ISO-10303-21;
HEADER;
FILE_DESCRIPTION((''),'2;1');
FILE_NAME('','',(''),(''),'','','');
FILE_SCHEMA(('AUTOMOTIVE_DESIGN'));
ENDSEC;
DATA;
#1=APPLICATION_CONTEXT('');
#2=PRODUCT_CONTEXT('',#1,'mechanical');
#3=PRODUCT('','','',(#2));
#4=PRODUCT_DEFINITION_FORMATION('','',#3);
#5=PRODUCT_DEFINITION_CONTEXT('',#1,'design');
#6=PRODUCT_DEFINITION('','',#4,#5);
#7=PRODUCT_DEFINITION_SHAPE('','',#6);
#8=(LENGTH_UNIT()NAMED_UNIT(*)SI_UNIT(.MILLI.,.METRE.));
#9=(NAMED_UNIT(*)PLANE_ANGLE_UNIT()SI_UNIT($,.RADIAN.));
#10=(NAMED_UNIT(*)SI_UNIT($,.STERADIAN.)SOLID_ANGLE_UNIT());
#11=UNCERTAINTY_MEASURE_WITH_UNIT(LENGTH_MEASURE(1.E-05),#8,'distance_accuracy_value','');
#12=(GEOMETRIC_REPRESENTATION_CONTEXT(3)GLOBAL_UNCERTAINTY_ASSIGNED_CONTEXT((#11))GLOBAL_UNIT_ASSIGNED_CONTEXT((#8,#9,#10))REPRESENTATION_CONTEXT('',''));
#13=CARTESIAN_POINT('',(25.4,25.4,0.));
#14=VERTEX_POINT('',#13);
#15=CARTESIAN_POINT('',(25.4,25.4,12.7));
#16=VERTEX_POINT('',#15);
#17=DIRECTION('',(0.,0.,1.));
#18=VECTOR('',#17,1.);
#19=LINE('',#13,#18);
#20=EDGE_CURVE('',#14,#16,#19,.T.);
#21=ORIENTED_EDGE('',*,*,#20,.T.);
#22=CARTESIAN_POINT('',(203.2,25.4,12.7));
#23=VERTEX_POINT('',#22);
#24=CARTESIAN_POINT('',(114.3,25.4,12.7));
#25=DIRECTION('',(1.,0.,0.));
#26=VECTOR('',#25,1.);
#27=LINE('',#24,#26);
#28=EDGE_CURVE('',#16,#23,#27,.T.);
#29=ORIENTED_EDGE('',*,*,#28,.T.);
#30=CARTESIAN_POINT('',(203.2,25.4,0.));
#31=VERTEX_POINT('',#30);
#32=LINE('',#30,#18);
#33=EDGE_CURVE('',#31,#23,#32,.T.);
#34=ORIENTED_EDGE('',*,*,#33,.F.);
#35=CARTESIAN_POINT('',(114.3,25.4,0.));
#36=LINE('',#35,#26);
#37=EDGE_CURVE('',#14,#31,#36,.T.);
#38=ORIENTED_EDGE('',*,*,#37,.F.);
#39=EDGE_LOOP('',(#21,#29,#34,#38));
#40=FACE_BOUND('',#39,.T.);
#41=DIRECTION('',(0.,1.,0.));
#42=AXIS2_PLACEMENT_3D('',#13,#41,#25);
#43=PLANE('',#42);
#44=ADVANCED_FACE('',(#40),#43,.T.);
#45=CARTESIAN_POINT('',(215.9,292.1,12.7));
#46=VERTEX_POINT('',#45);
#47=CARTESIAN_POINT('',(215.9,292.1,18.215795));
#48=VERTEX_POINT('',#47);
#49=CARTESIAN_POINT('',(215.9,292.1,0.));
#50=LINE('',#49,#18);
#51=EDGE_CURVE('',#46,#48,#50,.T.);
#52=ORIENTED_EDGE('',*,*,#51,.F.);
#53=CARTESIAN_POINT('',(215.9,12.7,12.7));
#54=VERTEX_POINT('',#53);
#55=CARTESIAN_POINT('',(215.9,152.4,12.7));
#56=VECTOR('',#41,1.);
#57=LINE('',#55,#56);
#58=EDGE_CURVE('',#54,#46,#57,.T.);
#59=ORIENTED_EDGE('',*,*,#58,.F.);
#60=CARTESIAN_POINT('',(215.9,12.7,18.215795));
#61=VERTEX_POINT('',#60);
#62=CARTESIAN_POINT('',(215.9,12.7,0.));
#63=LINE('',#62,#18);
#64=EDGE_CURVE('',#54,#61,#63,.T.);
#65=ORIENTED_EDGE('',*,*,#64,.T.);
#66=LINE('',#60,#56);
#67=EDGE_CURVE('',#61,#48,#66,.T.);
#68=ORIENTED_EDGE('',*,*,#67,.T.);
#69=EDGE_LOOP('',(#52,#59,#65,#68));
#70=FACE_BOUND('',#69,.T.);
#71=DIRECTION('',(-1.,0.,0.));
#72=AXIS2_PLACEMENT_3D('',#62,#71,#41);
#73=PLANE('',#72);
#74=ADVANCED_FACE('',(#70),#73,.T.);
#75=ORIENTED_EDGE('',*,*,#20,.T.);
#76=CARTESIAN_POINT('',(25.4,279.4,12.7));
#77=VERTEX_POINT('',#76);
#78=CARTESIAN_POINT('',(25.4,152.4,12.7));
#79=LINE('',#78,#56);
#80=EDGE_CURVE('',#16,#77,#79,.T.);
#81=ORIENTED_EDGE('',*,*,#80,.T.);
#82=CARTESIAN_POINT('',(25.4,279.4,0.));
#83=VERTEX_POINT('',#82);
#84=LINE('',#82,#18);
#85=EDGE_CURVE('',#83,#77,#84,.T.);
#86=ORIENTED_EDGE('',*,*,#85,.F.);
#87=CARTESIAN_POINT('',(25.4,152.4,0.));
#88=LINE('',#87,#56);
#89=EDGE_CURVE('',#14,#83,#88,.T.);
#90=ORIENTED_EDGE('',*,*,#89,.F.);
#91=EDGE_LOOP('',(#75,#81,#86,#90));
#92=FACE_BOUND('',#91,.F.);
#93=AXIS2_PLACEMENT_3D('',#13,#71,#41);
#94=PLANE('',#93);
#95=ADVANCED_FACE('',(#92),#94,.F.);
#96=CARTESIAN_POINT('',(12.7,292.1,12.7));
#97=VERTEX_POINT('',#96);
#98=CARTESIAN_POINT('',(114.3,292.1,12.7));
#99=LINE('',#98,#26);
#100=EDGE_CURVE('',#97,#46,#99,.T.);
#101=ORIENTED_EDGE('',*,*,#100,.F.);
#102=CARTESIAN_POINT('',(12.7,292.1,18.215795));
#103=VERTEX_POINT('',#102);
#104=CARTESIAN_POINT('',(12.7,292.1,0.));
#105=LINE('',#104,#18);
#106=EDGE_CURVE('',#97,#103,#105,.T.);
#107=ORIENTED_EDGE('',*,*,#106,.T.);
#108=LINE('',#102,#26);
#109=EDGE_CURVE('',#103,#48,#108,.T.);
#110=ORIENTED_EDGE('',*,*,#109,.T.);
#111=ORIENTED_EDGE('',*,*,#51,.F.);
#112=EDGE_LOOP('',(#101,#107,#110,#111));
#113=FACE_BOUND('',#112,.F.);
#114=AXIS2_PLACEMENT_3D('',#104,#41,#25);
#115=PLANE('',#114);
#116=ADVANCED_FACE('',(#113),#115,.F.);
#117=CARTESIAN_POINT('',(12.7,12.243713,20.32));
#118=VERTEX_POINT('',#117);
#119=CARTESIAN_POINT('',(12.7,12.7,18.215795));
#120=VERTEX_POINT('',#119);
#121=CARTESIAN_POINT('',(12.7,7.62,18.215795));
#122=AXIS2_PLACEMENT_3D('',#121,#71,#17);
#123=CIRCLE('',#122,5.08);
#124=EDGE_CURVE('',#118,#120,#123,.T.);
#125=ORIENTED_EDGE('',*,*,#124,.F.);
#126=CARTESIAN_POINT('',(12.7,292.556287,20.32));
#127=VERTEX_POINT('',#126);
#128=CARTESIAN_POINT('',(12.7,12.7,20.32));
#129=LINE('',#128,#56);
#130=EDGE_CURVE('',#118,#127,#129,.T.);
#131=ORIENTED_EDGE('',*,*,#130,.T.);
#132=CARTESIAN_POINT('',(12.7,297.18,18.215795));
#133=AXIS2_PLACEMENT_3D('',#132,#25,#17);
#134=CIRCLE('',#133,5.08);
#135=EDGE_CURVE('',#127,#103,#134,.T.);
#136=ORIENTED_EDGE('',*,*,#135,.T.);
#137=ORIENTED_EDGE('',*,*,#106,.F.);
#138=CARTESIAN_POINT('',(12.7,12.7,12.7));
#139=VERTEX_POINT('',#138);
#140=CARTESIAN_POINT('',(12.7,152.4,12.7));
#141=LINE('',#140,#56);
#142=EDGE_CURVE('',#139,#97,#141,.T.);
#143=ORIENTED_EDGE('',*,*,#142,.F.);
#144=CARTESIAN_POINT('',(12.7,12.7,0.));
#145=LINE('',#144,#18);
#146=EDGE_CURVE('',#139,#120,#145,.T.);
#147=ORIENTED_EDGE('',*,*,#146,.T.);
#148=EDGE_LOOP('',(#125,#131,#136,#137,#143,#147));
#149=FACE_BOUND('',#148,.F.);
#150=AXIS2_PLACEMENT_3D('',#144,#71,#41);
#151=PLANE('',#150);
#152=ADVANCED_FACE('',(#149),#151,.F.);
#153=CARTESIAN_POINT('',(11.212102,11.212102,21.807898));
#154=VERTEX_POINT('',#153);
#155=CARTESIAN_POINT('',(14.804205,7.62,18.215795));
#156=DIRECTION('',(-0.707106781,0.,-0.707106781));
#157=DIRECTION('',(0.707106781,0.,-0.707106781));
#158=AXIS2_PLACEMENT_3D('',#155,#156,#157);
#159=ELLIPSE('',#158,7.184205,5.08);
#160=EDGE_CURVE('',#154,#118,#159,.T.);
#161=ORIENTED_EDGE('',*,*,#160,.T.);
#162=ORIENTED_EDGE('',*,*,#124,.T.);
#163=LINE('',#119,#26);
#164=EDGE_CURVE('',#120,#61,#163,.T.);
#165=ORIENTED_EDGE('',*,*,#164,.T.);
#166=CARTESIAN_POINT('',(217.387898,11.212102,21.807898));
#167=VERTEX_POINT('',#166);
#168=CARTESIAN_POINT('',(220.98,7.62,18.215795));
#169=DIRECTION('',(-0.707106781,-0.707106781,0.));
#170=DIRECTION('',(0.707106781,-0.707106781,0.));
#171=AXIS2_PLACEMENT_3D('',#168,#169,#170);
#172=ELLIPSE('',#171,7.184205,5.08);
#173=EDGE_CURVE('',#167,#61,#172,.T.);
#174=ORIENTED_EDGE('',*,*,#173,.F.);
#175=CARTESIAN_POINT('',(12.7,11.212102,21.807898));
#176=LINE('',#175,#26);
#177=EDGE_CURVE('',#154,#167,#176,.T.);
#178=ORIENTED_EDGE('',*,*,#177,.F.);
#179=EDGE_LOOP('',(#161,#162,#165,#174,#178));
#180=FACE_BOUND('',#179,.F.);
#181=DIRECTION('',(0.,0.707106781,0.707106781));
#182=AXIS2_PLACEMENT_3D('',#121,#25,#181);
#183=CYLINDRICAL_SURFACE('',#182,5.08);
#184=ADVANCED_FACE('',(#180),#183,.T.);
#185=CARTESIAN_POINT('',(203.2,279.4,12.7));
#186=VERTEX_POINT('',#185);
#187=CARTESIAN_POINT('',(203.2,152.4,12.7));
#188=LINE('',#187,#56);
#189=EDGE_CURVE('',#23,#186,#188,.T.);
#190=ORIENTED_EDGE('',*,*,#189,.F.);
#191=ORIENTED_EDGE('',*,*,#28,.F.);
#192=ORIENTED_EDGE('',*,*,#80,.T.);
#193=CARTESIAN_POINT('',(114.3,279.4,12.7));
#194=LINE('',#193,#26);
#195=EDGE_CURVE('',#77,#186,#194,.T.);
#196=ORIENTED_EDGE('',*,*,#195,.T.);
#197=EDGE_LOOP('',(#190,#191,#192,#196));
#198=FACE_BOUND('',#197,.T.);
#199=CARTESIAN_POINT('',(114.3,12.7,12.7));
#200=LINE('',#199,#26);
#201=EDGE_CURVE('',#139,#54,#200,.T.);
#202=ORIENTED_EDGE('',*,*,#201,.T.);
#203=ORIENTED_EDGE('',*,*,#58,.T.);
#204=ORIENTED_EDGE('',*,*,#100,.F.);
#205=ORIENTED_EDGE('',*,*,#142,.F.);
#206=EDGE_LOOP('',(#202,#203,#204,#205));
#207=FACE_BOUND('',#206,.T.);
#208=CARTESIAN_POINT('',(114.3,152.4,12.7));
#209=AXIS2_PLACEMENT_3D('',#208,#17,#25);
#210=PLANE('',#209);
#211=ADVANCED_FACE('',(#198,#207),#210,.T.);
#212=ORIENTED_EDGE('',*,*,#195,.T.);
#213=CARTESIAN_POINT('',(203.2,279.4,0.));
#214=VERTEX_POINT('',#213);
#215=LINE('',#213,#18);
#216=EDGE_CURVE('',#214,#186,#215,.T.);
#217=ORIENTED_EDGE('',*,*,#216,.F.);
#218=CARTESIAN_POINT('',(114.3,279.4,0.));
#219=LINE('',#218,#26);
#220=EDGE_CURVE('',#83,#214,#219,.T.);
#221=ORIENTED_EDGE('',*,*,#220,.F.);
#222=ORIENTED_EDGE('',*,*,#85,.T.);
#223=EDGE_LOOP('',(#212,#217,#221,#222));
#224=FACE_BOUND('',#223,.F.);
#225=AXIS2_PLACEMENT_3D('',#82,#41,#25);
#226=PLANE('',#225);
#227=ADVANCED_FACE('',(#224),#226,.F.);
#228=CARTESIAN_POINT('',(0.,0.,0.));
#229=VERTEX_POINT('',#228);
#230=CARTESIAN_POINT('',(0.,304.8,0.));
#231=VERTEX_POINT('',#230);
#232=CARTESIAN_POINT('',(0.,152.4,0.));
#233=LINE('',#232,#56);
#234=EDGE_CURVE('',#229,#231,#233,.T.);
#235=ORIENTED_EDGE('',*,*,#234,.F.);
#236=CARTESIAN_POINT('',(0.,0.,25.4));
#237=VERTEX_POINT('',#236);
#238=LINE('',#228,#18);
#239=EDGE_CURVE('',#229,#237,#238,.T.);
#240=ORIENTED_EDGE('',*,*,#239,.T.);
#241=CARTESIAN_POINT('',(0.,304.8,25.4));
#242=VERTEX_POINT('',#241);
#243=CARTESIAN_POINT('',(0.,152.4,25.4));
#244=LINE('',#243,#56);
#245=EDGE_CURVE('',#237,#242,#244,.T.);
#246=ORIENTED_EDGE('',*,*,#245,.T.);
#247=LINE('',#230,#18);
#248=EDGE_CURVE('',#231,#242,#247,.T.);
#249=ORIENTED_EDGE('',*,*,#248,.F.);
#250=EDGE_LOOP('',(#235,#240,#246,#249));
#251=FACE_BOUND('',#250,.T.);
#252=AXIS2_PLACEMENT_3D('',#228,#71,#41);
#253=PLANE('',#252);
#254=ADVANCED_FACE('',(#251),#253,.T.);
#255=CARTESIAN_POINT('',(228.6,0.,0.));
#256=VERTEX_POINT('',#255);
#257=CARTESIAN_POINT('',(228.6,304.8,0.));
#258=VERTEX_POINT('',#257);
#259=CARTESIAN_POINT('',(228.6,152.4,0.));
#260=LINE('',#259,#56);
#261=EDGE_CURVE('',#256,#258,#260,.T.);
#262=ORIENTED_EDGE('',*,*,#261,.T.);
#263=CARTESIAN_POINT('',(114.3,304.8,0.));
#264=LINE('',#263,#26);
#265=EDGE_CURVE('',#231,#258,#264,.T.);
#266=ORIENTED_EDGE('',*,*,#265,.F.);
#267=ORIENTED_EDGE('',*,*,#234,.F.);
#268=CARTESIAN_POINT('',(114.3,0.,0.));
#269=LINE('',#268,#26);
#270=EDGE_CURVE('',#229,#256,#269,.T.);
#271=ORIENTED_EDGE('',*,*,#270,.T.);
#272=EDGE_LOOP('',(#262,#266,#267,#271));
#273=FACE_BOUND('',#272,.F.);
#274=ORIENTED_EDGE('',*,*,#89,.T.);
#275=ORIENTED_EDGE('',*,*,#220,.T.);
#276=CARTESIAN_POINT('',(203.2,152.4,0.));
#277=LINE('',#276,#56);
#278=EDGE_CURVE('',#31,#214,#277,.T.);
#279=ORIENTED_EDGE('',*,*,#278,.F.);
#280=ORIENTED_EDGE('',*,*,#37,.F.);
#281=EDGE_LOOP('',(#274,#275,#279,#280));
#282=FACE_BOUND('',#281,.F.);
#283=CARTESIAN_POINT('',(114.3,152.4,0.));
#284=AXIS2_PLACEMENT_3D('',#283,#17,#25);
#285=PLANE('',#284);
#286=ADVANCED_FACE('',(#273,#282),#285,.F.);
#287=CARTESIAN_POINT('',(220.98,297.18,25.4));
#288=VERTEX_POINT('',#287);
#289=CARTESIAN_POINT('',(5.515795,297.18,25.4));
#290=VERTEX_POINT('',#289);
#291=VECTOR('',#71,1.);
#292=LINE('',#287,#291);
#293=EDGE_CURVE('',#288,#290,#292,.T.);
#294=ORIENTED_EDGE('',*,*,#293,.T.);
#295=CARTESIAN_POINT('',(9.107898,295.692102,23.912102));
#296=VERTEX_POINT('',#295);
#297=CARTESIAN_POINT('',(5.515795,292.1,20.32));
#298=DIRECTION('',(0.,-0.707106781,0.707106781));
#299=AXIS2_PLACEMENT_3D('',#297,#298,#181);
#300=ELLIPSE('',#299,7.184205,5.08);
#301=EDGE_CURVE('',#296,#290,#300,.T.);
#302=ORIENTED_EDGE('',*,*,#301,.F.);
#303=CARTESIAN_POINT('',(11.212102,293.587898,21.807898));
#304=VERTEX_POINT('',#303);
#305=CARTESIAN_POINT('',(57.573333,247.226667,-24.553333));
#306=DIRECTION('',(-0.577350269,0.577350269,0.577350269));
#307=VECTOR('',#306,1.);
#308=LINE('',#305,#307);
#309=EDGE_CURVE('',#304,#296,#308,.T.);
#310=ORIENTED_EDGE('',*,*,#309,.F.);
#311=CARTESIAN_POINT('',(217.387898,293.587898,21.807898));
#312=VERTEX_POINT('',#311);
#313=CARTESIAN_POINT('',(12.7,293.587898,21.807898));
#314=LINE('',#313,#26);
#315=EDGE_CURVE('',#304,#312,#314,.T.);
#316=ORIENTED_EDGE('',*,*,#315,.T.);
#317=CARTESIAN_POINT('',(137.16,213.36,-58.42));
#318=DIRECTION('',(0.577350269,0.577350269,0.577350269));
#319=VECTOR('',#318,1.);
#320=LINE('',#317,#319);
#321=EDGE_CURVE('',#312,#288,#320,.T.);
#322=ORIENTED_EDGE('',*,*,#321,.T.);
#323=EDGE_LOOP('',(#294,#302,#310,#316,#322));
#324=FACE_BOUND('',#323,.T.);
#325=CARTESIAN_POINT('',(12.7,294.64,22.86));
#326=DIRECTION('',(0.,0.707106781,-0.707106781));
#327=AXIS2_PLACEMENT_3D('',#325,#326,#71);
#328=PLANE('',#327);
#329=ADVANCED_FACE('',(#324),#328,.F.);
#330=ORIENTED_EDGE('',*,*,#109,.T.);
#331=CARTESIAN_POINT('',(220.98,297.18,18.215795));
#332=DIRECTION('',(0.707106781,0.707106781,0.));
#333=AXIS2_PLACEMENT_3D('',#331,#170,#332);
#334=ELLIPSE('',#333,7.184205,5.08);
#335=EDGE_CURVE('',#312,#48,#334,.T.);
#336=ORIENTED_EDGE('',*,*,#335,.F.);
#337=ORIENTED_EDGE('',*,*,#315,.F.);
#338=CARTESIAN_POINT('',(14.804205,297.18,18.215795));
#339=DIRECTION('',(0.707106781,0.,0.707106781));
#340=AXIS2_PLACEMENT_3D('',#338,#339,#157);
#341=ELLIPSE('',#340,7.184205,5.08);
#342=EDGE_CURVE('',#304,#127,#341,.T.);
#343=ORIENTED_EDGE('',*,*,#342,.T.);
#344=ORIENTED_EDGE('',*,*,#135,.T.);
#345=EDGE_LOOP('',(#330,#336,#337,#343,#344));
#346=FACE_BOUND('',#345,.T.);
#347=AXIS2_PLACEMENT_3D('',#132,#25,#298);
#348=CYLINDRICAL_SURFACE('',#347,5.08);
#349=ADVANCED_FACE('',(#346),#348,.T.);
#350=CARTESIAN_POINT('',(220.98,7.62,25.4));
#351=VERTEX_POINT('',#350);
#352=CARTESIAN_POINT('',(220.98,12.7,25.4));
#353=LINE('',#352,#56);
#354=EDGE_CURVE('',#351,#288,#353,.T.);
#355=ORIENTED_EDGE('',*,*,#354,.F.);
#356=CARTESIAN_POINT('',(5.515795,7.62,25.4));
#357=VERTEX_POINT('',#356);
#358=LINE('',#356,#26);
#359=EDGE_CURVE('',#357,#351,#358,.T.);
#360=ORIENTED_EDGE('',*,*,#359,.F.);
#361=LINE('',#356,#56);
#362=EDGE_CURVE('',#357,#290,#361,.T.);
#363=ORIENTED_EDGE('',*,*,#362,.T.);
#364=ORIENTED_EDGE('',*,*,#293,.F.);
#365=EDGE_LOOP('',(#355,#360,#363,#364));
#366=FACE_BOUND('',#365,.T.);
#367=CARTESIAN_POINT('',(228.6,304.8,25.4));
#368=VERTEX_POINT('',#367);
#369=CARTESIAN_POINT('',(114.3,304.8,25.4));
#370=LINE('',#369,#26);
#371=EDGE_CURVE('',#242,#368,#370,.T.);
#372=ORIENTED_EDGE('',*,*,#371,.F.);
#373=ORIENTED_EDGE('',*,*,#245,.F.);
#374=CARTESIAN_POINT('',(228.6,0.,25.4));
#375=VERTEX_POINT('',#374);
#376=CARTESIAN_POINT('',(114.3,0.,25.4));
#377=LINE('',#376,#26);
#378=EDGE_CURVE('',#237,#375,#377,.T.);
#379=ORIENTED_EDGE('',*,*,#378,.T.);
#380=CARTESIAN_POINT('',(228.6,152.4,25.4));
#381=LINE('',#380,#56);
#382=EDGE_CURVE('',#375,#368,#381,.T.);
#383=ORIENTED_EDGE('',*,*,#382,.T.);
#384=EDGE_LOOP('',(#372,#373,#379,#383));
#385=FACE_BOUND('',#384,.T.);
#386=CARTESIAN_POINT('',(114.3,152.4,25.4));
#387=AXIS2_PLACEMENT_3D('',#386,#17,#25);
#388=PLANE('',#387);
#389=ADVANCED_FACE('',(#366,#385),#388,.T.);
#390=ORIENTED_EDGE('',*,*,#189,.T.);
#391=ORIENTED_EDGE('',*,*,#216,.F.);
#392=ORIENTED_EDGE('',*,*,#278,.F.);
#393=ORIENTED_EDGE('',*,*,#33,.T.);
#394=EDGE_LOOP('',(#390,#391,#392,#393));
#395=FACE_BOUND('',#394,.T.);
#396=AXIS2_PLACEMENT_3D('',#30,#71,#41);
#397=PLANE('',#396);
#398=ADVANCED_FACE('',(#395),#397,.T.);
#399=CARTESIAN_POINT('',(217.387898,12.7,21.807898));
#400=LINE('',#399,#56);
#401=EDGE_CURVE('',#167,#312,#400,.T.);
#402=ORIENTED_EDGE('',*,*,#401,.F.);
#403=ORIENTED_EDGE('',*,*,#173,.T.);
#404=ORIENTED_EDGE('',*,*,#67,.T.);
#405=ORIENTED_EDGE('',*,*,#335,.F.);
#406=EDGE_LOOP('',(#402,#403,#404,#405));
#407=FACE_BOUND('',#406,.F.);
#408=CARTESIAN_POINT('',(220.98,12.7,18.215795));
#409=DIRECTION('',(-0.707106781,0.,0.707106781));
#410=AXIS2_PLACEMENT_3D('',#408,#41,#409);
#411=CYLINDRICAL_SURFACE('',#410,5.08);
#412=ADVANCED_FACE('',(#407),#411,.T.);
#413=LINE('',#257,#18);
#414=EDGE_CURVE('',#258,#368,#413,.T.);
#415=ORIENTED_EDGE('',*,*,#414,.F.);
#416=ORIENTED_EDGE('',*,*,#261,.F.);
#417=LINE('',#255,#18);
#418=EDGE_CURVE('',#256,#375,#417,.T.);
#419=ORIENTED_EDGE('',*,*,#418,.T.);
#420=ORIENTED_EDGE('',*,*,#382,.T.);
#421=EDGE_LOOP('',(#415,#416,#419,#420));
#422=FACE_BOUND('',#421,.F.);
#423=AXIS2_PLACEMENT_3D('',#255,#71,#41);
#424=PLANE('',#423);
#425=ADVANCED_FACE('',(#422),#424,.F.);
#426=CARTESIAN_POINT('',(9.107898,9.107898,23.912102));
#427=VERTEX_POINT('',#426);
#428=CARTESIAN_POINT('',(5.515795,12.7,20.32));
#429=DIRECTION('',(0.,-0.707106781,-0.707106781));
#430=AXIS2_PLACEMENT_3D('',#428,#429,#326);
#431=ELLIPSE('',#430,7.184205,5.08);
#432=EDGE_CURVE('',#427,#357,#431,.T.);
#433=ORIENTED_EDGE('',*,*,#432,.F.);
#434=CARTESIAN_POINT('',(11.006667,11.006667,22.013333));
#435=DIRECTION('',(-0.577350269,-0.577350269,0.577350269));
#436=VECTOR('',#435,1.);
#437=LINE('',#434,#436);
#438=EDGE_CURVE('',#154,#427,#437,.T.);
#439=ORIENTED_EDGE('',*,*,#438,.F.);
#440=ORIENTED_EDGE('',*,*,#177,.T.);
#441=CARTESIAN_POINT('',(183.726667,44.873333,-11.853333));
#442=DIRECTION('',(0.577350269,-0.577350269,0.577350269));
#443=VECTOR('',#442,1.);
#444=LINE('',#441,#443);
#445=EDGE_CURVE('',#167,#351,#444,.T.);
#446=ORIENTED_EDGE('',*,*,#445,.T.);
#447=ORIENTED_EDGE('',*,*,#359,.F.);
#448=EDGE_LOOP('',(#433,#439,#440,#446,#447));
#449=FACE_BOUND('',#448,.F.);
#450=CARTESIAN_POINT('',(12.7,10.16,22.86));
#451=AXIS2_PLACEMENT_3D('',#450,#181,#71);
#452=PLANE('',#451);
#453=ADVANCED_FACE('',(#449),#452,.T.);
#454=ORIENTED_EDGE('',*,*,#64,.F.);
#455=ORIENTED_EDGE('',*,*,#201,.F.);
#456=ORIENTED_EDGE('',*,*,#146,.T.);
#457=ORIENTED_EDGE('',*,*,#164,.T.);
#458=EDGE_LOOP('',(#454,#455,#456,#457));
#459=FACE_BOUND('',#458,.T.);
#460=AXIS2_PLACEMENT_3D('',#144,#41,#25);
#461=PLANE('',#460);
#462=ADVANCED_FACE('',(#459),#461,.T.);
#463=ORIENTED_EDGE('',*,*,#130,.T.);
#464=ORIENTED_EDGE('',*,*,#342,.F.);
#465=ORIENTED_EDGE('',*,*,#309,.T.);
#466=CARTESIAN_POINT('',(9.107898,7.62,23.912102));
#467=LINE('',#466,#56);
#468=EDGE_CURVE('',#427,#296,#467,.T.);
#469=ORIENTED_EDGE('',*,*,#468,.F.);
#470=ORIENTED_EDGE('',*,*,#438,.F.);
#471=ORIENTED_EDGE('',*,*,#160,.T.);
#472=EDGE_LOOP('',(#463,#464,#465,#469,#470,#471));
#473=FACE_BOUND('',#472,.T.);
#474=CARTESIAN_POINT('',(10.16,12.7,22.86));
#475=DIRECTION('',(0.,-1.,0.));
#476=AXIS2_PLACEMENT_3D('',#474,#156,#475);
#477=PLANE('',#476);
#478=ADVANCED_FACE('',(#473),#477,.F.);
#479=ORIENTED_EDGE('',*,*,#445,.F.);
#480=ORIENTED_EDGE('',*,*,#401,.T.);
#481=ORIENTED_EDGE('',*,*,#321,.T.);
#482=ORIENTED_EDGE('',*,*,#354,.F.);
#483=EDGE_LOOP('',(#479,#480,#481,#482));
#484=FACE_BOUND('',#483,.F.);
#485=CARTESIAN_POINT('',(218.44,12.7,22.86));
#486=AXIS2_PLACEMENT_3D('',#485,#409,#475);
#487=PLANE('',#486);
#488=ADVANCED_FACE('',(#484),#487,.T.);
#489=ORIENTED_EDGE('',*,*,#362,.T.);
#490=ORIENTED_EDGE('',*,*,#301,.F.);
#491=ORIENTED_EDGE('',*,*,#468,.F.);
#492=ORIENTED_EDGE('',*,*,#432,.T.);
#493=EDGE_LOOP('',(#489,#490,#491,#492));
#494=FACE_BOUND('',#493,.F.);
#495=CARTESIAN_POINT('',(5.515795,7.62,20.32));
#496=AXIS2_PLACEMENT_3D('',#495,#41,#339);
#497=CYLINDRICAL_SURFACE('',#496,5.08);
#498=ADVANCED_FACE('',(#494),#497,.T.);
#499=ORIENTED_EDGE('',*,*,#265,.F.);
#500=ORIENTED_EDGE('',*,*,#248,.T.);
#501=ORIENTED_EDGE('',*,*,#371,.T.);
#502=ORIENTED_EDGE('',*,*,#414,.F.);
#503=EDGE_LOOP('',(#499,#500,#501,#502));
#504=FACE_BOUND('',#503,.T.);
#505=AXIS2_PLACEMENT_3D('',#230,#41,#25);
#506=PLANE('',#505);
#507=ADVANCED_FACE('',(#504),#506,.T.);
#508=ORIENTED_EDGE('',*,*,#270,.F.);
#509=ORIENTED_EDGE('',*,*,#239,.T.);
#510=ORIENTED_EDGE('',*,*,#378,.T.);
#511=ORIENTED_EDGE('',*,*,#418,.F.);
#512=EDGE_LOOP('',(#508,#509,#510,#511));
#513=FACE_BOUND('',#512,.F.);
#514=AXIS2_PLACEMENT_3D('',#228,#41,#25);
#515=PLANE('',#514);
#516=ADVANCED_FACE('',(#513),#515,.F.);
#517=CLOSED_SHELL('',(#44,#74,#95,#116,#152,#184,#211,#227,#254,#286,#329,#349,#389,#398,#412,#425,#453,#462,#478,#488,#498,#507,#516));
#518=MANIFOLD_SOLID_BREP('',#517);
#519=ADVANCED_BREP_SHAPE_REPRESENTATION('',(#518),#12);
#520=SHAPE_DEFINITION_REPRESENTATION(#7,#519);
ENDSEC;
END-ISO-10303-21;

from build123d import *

# Parameters (mm, degrees)
F0_W     = 228.6
F0_H     = 304.8
F0_W_2   = 203.2
F0_H_2   = 279.4
F1_DEPTH = 25.4
F0_W_3   = 177.8
F0_H_3   = 254
F2_DEPTH = 12.7
F3_SIZE  = 5.08
F4_F1_R  = 5.08
F4_F2_R  = 5.08
F4_F3_R  = 5.08
F4_F4_R  = 5.08


with BuildPart() as f1:
    # F0 (on Top) → F1 (new body)
    with BuildSketch(Plane.XY):
        with Locations((114.3, 152.4)):
            Rectangle(F0_W, F0_H)
        with Locations((114.3, 152.4)):
            Rectangle(F0_W_2, F0_H_2, mode=Mode.SUBTRACT)
    extrude(amount=F1_DEPTH)

    # F0 (on Top) → F2 (join)
    with BuildSketch(Plane.XY):
        with Locations((114.3, 152.4)):
            Rectangle(F0_W_2, F0_H_2)
        with Locations((114.3, 152.4)):
            Rectangle(F0_W_3, F0_H_3, mode=Mode.SUBTRACT)
    extrude(amount=F2_DEPTH)

    # F3
    f3_edges = [f1.edges().sort_by_distance(p)[0] for p in [
        (114.3, 292.1, 25.4),
        (215.9, 152.4, 25.4),
        (12.7, 152.4, 25.4),
        (114.3, 12.7, 25.4),
    ]]
    chamfer(f3_edges, length=F3_SIZE)

    # F4: fillet of radius 5.08 on 4 edges, made by hand

    # F4_f1
    f4_f1_edges = [f1.edges().sort_by_distance(p)[0] for p in [
        (7.62, 152.4, 25.4),
    ]]
    fillet(f4_f1_edges, radius=F4_F1_R)

    # F4_f2
    f4_f2_edges = [f1.edges().sort_by_distance(p)[0] for p in [
        (114.3, 292.1, 20.32),
    ]]
    fillet(f4_f2_edges, radius=F4_F2_R)

    # F4_f3
    f4_f3_edges = [f1.edges().sort_by_distance(p)[0] for p in [
        (215.9, 152.6281435083, 20.32),
    ]]
    fillet(f4_f3_edges, radius=F4_F3_R)

    # F4_f4
    f4_f4_edges = [f1.edges().sort_by_distance(p)[0] for p in [
        (114.5281435083, 12.7, 20.32),
    ]]
    fillet(f4_f4_edges, radius=F4_F4_R)


solid = f1.part
